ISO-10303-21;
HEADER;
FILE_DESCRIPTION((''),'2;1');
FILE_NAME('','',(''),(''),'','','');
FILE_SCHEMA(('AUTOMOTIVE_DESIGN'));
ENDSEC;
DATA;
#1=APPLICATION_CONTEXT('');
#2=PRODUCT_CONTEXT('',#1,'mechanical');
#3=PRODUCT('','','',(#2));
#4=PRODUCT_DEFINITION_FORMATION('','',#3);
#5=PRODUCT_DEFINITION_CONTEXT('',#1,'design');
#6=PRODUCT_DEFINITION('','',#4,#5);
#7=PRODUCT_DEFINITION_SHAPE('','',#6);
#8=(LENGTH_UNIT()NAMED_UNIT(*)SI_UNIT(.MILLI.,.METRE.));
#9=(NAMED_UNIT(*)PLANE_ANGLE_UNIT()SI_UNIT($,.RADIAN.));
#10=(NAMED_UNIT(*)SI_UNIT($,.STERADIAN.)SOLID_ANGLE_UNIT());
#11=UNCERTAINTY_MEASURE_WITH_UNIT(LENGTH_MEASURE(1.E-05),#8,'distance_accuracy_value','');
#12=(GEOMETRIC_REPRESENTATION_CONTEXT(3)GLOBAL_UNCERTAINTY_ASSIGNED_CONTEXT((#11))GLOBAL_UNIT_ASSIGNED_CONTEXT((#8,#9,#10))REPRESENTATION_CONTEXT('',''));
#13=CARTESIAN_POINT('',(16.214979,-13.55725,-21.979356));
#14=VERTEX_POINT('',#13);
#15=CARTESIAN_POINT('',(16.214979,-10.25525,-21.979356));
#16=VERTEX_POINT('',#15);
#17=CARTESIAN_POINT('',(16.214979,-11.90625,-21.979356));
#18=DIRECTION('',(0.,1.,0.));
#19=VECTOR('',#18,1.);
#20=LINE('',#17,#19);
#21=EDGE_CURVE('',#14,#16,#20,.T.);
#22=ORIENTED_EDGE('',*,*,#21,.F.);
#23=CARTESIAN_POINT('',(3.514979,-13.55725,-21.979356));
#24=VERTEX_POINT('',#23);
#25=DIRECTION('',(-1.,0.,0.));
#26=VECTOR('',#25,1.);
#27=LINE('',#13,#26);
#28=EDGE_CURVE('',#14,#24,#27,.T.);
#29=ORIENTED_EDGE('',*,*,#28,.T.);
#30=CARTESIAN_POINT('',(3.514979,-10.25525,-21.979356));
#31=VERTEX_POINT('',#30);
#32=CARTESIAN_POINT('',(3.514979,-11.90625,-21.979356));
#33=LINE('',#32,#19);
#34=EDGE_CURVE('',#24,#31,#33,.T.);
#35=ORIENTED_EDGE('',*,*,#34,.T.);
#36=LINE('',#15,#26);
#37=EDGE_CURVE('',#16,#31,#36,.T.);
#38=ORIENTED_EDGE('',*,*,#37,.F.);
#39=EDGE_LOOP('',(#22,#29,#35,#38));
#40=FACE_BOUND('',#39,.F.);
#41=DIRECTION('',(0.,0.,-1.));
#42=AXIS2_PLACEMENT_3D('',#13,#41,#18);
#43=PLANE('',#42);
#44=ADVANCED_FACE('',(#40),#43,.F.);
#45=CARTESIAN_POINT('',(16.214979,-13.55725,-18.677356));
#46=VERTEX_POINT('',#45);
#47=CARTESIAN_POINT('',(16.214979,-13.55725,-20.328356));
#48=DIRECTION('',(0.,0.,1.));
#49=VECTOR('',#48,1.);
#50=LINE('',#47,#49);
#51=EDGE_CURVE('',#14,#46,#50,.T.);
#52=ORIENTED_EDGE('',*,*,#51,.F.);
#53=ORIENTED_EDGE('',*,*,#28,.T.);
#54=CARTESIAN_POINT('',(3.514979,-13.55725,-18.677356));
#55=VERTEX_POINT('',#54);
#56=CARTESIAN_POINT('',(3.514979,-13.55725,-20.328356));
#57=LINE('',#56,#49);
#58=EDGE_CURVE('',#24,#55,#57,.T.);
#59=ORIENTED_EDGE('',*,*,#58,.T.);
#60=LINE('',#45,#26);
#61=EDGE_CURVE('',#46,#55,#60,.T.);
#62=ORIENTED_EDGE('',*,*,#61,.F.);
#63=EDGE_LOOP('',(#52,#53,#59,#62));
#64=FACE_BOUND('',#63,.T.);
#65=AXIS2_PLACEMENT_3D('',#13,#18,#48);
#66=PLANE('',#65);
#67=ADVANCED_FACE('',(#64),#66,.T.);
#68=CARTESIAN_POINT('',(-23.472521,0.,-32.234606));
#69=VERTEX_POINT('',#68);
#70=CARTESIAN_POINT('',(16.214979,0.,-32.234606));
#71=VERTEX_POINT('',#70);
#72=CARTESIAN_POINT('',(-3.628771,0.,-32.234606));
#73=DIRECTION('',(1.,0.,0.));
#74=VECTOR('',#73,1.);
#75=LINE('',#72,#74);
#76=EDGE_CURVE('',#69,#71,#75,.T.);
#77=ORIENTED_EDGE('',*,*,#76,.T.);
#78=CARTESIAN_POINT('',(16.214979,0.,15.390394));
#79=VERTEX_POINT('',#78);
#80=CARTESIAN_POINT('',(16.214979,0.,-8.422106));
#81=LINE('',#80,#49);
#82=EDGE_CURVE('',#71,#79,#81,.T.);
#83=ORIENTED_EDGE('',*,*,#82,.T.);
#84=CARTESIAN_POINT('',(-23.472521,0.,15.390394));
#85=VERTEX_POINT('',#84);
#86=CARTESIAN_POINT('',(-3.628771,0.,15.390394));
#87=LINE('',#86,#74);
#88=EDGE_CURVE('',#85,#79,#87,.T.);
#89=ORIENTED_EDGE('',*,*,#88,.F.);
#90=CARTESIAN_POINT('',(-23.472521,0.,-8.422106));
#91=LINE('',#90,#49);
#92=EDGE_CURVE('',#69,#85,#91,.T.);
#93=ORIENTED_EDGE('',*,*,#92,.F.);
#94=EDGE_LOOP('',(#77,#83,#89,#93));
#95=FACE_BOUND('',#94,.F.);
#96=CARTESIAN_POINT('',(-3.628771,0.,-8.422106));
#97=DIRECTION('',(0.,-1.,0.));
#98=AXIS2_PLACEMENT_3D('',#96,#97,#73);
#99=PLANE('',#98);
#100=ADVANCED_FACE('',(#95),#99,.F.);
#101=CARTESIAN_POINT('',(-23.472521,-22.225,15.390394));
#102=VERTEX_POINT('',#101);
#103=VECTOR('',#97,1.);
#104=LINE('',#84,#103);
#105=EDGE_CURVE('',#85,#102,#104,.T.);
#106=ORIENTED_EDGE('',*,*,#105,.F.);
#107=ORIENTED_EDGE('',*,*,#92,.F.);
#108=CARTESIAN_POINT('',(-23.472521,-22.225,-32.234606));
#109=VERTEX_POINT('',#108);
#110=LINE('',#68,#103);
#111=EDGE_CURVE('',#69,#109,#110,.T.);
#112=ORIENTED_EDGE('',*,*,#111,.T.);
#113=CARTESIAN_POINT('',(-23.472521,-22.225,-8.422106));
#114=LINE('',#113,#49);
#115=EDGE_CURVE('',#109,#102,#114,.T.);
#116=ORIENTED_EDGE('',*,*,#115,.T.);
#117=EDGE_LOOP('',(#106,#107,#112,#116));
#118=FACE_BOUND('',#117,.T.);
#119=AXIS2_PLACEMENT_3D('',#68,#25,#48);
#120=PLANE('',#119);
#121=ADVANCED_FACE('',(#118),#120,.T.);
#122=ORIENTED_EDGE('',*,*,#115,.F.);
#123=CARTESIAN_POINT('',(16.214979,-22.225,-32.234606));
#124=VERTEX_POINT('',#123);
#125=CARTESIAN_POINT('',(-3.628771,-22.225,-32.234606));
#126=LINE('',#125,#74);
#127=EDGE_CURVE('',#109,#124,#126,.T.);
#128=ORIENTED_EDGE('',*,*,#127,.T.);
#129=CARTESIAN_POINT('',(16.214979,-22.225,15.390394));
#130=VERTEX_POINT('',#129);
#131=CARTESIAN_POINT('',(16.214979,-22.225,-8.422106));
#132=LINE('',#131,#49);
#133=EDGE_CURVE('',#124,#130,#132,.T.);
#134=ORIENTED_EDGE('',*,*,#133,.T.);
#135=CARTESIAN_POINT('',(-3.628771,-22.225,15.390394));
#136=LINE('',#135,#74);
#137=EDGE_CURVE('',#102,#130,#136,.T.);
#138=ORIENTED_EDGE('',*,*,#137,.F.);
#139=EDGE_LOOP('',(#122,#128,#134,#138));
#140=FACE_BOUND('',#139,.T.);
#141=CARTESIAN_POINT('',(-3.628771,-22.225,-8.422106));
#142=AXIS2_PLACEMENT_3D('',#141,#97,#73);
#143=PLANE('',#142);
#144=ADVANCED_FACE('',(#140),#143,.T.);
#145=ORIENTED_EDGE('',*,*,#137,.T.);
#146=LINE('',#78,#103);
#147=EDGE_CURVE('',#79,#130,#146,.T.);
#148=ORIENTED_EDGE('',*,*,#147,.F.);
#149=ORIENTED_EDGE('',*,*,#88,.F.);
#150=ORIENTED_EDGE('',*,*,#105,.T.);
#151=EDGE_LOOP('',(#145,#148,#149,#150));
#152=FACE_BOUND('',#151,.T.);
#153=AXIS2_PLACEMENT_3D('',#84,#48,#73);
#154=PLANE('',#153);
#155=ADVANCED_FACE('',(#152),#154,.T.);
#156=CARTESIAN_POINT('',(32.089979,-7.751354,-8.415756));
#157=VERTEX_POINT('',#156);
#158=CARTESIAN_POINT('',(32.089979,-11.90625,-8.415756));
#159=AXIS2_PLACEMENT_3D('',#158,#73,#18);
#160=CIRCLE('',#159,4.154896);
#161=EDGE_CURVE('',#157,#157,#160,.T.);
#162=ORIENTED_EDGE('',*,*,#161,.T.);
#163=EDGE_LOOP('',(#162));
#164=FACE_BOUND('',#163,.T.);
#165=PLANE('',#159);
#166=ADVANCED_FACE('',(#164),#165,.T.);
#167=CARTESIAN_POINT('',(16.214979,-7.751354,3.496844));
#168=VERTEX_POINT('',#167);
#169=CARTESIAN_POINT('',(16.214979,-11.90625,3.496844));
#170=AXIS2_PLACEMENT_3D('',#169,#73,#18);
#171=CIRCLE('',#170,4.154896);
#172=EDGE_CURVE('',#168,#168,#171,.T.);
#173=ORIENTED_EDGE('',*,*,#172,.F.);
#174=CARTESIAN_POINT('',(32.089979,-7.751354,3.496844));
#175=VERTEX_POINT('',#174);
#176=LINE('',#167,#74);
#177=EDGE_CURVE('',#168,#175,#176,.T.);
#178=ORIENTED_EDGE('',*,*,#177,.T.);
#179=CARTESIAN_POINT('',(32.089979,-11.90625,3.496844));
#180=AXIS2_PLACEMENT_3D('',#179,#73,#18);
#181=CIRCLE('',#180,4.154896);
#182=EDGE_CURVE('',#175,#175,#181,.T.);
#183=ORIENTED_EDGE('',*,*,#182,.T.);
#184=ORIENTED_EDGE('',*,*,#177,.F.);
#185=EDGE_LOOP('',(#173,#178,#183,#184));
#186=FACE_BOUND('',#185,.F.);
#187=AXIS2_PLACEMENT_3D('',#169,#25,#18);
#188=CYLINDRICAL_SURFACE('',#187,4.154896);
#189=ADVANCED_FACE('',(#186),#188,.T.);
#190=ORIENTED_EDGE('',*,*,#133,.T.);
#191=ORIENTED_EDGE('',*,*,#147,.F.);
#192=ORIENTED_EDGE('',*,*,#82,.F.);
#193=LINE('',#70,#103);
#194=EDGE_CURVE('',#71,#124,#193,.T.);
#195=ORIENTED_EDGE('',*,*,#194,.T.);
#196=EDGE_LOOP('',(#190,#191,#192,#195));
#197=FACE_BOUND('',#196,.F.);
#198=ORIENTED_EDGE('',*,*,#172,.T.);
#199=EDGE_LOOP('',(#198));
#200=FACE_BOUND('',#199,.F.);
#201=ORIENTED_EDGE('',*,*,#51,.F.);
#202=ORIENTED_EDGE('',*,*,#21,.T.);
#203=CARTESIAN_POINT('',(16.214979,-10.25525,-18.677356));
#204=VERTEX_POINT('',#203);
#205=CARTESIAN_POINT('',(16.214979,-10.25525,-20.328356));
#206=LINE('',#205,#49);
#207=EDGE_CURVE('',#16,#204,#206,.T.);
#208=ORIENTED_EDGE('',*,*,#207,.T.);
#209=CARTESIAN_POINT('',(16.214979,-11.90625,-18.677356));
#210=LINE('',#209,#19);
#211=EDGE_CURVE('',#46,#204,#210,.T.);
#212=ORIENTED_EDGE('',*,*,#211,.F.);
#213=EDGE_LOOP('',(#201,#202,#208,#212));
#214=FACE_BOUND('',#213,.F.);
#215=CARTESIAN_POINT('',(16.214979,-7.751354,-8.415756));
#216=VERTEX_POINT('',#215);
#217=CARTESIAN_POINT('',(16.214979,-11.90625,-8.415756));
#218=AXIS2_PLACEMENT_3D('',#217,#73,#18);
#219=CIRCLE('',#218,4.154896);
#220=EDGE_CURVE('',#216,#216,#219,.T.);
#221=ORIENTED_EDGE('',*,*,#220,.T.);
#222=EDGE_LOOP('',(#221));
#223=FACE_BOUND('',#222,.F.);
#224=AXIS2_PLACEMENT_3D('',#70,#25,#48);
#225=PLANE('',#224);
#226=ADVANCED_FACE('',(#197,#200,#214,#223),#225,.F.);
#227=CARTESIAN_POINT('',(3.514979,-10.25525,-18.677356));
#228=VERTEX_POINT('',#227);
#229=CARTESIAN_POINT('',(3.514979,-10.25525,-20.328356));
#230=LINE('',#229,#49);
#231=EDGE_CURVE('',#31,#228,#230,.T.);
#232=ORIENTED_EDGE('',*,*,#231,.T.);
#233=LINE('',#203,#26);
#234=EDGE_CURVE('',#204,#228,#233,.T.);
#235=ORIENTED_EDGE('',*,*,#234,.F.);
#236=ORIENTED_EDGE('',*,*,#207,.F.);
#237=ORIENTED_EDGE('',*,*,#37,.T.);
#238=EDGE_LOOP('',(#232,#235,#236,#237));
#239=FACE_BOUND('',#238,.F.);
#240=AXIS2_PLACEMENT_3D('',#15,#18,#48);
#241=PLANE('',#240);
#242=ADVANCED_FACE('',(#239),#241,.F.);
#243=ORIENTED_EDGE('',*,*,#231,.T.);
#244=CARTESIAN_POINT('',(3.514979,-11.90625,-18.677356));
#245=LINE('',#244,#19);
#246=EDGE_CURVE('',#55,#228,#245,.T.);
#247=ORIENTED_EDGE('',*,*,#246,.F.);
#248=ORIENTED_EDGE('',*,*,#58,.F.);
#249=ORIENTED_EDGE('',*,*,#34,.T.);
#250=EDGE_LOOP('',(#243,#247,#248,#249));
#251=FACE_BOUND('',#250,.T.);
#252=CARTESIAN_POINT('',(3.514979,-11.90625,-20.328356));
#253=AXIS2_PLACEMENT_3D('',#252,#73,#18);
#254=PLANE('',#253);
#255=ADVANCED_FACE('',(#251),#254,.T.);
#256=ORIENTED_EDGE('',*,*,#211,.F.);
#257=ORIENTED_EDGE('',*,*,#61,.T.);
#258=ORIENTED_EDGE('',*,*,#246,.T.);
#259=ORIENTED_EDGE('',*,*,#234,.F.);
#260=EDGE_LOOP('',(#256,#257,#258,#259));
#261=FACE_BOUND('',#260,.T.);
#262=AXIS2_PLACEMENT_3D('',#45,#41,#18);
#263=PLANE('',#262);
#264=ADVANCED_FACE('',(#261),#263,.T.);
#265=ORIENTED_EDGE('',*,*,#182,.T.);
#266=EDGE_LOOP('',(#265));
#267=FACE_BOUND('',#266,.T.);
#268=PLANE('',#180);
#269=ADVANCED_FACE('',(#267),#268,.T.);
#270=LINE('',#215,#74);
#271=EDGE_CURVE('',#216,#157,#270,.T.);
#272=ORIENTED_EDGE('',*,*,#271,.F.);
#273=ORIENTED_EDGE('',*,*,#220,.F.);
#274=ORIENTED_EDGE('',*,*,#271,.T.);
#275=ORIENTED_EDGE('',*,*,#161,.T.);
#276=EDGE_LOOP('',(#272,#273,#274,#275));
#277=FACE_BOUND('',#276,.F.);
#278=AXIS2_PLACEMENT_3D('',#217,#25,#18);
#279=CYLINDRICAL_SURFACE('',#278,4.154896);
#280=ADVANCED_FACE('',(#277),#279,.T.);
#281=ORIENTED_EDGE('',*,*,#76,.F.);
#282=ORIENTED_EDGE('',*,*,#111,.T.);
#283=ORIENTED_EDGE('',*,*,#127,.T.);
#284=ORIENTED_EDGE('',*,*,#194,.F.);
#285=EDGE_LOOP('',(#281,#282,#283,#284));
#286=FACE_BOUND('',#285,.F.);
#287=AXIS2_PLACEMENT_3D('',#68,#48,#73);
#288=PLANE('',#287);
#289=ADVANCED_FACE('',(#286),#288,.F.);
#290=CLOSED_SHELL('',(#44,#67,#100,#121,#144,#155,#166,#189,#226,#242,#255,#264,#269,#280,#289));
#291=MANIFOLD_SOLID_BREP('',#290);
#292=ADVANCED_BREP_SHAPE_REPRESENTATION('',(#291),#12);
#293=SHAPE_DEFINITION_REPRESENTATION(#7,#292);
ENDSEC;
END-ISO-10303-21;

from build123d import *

# Parameters (mm, degrees)
F0_W     = 39.6875
F0_H     = 47.625
F1_DEPTH = 22.225
F2_R     = 4.1548957558
F3_DEPTH = 15.875
F2_W     = 3.302
F2_H     = 3.302
F4_DEPTH = 12.7


# Not quite as in the source:
# - a length typed as a fraction of an inch, garbled in the dataset ("3 / 203.2 mm" for 3/8 in), is restored


with BuildPart() as f1:
    # F0 (on Front) → F1 (new body)
    with BuildSketch(Plane.XZ):
        with Locations((-3.6287705289, -8.4221055731)):
            Rectangle(F0_W, F0_H)
    extrude(amount=F1_DEPTH)

    # F2 (on face) → F3 (join)
    with BuildSketch(Plane.YZ.offset(16.2149794711)):
        with Locations((-11.90625, 3.4968444269)):
            Circle(F2_R)
        with Locations((-11.90625, -8.4157555731)):
            Circle(F2_R)
    extrude(amount=F3_DEPTH)

    # F2 (on face) → F4 (cut)
    with BuildSketch(Plane.YZ.offset(16.2149794711)):
        with Locations((-11.90625, -20.3283555731)):
            Rectangle(F2_W, F2_H)
    extrude(amount=-F4_DEPTH, mode=Mode.SUBTRACT)


solid = f1.part
